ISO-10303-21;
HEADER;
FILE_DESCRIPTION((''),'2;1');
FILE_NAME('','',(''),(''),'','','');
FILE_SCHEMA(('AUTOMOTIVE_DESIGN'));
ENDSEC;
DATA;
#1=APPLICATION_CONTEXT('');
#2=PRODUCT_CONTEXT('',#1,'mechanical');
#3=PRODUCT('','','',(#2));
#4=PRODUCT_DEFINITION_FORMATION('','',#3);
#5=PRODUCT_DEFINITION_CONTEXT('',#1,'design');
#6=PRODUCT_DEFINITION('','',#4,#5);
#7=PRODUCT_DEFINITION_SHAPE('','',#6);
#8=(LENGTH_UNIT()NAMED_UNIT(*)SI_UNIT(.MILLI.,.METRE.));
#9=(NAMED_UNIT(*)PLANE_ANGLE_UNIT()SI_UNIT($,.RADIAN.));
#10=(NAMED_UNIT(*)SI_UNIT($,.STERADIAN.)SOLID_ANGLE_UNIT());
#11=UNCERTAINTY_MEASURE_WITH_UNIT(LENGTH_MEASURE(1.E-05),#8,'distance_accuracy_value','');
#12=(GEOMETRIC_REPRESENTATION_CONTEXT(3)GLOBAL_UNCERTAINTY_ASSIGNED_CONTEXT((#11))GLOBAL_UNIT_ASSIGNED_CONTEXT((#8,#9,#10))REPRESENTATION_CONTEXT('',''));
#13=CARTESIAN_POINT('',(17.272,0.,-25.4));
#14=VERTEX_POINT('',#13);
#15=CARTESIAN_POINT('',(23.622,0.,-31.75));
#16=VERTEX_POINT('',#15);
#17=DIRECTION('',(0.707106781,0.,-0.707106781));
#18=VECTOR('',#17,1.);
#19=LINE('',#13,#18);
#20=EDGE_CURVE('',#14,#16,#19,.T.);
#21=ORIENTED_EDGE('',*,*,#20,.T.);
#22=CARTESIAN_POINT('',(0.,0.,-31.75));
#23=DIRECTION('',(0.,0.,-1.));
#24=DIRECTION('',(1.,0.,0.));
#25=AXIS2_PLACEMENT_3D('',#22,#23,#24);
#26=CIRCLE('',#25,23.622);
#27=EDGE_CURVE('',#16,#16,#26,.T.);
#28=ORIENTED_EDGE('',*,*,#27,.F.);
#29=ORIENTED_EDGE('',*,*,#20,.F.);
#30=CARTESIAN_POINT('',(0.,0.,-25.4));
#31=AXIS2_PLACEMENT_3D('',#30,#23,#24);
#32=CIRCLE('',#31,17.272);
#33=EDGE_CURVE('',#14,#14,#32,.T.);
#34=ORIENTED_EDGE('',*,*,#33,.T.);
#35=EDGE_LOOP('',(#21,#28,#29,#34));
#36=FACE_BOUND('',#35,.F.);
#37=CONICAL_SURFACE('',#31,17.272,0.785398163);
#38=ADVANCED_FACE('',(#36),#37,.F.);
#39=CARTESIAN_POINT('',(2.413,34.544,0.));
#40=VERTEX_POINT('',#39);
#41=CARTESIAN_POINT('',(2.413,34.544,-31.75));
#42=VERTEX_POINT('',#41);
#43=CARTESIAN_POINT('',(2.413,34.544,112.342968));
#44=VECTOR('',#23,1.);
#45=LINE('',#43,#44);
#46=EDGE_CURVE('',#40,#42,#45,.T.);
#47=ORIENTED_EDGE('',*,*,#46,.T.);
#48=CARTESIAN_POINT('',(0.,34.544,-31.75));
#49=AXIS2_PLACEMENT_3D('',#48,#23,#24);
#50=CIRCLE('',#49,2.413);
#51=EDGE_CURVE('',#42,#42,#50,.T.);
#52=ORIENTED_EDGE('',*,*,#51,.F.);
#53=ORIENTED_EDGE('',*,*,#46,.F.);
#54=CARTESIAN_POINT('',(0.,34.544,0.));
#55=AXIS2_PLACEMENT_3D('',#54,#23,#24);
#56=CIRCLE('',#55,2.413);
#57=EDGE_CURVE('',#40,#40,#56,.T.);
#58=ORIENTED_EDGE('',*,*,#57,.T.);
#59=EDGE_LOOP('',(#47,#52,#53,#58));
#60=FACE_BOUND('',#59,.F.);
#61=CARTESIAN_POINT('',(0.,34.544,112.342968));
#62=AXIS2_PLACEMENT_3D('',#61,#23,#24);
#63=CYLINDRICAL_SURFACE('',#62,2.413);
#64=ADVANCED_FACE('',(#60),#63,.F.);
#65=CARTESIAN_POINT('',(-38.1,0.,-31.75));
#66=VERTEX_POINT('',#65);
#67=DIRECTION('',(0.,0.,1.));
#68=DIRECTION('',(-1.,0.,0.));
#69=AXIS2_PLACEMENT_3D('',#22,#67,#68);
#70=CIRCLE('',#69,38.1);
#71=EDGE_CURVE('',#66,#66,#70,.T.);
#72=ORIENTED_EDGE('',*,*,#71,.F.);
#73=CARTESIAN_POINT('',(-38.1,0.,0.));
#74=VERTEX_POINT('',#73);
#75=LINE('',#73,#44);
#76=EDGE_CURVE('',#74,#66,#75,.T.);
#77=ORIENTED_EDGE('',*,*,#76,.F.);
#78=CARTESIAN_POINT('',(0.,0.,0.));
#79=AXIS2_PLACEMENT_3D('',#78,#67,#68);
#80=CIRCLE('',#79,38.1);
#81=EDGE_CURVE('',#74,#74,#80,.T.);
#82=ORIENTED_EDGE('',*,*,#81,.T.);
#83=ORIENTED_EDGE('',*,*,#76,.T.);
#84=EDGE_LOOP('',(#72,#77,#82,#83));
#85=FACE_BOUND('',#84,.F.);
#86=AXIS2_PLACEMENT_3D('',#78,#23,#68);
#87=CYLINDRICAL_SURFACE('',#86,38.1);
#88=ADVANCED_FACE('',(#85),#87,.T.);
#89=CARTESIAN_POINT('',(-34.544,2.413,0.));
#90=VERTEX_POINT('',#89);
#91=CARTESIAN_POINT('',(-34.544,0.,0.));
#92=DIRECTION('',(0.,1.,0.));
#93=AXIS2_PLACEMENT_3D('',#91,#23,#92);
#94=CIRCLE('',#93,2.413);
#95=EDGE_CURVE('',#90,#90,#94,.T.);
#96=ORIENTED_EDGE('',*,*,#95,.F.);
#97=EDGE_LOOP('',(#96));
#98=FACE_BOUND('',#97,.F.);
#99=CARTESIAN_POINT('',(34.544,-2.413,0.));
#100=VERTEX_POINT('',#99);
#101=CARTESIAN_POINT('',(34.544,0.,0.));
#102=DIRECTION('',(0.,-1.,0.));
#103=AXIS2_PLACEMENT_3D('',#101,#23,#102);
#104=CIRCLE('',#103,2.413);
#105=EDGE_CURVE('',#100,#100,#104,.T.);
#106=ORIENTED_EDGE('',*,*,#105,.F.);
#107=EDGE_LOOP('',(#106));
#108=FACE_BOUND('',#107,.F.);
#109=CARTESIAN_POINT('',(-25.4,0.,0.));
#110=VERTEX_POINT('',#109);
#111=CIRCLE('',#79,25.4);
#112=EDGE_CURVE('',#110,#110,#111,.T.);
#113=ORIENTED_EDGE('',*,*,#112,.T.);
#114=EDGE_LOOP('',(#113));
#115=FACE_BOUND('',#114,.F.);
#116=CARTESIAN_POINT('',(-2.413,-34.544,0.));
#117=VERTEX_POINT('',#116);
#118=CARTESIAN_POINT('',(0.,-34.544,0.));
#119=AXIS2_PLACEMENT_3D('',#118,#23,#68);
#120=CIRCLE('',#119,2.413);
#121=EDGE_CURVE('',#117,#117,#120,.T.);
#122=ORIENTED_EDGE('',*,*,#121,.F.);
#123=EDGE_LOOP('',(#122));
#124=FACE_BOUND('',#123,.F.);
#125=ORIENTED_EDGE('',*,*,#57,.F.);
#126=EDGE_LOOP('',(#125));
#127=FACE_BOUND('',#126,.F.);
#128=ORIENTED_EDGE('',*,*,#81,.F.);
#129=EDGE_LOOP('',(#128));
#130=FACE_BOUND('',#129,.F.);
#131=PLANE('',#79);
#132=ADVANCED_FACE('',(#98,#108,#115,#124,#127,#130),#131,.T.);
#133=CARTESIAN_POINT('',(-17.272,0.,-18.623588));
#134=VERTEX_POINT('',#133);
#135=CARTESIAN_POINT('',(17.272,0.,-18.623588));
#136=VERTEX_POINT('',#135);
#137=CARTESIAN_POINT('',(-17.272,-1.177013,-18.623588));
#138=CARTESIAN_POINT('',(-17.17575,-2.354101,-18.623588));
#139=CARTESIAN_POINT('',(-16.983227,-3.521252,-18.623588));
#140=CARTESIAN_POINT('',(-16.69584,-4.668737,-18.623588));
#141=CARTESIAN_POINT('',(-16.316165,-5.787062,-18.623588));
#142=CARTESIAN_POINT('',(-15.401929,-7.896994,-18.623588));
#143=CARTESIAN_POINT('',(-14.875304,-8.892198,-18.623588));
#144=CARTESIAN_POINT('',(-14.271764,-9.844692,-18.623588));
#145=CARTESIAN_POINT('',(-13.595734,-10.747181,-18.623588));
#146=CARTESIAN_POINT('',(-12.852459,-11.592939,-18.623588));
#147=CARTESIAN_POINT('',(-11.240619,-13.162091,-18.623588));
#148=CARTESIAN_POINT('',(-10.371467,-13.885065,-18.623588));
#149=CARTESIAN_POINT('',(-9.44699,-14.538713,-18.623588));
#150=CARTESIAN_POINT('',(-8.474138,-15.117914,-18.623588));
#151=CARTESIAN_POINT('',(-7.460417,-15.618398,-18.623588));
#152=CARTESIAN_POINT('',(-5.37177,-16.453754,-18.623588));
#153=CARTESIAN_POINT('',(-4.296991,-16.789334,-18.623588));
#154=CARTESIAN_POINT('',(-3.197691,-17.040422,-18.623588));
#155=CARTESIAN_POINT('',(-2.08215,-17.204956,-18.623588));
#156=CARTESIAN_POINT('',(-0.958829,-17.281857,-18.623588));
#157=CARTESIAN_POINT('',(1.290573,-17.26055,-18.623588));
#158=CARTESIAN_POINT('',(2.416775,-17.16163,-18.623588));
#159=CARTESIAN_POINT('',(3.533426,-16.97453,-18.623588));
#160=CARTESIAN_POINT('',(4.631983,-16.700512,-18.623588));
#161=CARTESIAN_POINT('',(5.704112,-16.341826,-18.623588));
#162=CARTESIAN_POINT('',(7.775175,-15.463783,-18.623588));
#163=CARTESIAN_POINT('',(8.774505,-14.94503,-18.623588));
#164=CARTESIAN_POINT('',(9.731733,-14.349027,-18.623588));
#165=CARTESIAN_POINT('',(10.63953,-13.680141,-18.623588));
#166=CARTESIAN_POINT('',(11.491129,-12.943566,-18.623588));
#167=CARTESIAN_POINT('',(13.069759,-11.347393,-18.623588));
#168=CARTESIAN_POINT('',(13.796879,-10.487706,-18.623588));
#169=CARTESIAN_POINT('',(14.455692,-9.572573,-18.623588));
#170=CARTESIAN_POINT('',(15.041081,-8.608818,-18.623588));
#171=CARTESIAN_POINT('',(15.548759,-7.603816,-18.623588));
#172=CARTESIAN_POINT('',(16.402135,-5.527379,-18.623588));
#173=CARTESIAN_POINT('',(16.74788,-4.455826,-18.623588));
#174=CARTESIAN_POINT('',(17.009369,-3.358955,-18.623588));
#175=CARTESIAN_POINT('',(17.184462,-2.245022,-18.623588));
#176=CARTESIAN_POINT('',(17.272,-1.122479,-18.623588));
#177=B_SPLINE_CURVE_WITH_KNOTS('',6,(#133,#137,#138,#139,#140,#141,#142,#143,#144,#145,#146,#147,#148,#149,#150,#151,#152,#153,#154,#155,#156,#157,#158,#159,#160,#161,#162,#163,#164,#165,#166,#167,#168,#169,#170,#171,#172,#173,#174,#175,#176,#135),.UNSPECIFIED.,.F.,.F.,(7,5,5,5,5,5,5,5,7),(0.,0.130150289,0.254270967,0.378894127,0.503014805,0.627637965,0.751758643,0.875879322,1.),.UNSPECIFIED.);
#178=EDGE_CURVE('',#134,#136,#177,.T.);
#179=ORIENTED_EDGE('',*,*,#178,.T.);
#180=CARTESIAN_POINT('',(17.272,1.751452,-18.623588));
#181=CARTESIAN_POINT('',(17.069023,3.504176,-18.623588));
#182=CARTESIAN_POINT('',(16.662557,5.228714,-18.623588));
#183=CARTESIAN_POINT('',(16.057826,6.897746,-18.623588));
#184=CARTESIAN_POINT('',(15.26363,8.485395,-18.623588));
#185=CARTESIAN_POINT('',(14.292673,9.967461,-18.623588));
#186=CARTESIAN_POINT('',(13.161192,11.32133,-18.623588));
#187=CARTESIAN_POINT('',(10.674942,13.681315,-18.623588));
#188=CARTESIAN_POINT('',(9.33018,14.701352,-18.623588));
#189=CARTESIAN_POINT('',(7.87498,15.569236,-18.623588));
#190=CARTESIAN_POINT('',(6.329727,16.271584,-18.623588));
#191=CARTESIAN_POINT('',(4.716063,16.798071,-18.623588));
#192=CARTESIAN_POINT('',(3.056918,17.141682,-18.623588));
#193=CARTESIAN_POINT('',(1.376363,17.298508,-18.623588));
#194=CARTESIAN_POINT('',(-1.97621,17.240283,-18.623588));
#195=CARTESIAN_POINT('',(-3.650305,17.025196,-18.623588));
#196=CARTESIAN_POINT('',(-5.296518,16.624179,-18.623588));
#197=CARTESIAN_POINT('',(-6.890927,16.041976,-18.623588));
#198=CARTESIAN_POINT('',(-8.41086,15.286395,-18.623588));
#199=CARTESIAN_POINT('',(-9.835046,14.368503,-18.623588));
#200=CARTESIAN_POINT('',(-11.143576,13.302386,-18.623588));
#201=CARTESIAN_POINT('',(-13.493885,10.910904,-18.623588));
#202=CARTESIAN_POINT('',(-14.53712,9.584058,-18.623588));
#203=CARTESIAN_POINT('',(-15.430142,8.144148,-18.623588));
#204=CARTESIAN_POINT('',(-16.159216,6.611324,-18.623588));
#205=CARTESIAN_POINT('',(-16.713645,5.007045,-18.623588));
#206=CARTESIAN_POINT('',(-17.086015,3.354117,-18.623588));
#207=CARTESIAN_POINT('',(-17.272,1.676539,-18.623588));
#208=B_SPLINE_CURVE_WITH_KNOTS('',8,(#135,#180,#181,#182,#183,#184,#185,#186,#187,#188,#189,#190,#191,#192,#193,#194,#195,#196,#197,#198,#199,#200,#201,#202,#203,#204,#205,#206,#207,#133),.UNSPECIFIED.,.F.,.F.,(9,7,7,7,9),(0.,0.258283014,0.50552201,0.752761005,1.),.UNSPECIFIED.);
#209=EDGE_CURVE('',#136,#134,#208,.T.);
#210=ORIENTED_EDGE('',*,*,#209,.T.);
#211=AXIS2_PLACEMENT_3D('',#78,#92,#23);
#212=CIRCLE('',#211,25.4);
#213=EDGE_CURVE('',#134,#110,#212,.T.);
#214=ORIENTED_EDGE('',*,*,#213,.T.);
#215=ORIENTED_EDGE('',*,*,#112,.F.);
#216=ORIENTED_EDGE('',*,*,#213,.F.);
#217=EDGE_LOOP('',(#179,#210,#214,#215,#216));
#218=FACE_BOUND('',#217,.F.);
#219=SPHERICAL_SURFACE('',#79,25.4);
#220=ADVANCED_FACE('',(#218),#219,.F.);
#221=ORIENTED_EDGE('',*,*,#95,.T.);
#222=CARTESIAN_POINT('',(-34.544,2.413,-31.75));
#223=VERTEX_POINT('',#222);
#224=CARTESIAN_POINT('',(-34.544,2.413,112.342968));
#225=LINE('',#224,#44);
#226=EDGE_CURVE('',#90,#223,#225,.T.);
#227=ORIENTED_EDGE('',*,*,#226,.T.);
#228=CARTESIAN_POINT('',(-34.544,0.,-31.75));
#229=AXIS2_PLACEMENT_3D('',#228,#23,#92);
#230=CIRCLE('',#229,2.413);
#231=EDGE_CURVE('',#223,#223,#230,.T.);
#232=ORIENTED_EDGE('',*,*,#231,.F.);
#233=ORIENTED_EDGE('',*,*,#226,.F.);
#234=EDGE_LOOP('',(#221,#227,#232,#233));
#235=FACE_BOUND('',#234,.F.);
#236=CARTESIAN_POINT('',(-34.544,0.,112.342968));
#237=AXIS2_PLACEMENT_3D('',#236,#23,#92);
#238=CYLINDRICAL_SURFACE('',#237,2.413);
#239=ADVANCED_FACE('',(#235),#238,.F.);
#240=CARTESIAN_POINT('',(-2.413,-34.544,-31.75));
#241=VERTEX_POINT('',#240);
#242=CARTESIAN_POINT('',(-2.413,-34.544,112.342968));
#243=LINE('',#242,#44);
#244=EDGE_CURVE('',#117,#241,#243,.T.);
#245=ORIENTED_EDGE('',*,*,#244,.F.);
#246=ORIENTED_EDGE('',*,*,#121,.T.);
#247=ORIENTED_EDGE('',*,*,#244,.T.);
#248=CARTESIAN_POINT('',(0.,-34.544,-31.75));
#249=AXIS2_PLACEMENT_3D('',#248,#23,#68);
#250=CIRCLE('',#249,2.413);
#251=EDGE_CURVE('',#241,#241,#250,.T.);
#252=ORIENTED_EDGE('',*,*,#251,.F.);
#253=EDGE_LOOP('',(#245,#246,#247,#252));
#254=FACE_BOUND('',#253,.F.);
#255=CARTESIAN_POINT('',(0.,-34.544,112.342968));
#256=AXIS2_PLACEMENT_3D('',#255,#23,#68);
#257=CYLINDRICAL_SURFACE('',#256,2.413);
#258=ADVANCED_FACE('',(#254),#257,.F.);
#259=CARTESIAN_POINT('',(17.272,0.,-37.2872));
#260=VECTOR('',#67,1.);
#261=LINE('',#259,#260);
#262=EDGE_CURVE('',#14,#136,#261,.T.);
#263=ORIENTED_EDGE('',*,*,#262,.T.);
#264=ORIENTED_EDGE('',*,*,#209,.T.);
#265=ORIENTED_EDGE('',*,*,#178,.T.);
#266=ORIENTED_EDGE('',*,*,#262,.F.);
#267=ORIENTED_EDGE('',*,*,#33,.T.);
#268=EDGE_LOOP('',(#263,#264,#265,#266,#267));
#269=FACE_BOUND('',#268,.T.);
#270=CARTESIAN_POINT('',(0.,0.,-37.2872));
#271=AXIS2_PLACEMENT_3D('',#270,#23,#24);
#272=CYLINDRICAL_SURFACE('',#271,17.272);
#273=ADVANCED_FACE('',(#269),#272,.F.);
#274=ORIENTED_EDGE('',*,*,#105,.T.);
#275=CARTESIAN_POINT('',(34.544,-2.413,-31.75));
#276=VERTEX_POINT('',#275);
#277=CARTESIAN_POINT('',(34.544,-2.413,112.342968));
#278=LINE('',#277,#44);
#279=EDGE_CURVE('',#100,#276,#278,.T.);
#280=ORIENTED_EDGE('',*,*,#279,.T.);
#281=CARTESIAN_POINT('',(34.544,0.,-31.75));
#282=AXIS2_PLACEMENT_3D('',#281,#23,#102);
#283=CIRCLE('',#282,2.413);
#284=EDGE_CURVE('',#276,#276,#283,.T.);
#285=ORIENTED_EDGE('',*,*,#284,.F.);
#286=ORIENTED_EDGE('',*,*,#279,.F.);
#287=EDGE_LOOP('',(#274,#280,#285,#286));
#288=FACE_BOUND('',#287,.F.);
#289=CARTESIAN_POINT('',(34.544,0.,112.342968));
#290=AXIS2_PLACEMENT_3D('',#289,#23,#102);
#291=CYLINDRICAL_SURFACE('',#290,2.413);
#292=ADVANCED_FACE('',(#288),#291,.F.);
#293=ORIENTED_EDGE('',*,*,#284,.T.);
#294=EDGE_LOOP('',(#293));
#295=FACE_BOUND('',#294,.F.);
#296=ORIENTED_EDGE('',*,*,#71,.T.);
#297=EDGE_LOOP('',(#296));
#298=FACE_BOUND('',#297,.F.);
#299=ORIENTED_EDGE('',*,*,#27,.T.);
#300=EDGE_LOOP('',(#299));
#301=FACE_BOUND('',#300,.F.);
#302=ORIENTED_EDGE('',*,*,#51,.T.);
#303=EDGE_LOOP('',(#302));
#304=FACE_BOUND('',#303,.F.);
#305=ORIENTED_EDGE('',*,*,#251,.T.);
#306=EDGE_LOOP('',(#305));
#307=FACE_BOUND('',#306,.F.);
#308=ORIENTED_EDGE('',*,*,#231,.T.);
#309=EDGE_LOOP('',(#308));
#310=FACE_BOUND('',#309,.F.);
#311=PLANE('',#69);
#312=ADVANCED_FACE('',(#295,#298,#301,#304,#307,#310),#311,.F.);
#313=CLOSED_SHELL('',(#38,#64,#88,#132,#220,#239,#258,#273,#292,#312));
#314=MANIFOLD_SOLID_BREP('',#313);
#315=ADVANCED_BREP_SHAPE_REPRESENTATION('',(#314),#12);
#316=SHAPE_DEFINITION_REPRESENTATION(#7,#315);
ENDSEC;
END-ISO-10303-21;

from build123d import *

# Parameters (mm, degrees)
F3_R            = 17.272
F4_DEPTH        = 25.4
F5_SIZE         = 6.35
F7_D            = 4.826
F7_COPIES_COUNT = 4


# Not quite as in the source:
# - a pattern or mirror of a feature is missing from the dataset's text; its kind, count and spacing are read off the source's solid


with BuildPart() as f1:
    # F0 (on Front) → F1 (revolve)
    with BuildSketch(Plane.XZ):
        with BuildLine():
            ThreePointArc((0, -25.4), (-17.9605122421, -17.9605122421), (-25.4, 0))
            Line((-25.4, 0), (-38.1, 0))
            Line((-38.1, 0), (-38.1, -31.75))
            Line((-38.1, -31.75), (0, -31.75))
            Line((0, -31.75), (0, -25.4))
        make_face()
    revolve(axis=Axis((0, 0, -28.575), (0, 0, 1)))

    # F3 (on offset) → F4 (cut)
    with BuildSketch(Plane.XY.offset(-37.2872)):
        Circle(F3_R)
    extrude(amount=F4_DEPTH, mode=Mode.SUBTRACT)

    # F5
    f5_edges = [f1.edges().sort_by_distance(p)[0] for p in [
        (-17.272, 0, -31.75),
    ]]
    chamfer(f5_edges, length=F5_SIZE)

    # F7 (through all)
    with Locations(Plane.XY):
        with Locations((0, -34.544)):
            f7 = Hole(F7_D / 2)

    # F7_copies: F7 ×4 about axis
    f7_copies_axis = Axis((0, 0, 0), (0, 0, 1))
    for i in range(1, F7_COPIES_COUNT):
        add(f7.rotate(f7_copies_axis, i * 360 / F7_COPIES_COUNT), mode=Mode.SUBTRACT)


solid = f1.part
